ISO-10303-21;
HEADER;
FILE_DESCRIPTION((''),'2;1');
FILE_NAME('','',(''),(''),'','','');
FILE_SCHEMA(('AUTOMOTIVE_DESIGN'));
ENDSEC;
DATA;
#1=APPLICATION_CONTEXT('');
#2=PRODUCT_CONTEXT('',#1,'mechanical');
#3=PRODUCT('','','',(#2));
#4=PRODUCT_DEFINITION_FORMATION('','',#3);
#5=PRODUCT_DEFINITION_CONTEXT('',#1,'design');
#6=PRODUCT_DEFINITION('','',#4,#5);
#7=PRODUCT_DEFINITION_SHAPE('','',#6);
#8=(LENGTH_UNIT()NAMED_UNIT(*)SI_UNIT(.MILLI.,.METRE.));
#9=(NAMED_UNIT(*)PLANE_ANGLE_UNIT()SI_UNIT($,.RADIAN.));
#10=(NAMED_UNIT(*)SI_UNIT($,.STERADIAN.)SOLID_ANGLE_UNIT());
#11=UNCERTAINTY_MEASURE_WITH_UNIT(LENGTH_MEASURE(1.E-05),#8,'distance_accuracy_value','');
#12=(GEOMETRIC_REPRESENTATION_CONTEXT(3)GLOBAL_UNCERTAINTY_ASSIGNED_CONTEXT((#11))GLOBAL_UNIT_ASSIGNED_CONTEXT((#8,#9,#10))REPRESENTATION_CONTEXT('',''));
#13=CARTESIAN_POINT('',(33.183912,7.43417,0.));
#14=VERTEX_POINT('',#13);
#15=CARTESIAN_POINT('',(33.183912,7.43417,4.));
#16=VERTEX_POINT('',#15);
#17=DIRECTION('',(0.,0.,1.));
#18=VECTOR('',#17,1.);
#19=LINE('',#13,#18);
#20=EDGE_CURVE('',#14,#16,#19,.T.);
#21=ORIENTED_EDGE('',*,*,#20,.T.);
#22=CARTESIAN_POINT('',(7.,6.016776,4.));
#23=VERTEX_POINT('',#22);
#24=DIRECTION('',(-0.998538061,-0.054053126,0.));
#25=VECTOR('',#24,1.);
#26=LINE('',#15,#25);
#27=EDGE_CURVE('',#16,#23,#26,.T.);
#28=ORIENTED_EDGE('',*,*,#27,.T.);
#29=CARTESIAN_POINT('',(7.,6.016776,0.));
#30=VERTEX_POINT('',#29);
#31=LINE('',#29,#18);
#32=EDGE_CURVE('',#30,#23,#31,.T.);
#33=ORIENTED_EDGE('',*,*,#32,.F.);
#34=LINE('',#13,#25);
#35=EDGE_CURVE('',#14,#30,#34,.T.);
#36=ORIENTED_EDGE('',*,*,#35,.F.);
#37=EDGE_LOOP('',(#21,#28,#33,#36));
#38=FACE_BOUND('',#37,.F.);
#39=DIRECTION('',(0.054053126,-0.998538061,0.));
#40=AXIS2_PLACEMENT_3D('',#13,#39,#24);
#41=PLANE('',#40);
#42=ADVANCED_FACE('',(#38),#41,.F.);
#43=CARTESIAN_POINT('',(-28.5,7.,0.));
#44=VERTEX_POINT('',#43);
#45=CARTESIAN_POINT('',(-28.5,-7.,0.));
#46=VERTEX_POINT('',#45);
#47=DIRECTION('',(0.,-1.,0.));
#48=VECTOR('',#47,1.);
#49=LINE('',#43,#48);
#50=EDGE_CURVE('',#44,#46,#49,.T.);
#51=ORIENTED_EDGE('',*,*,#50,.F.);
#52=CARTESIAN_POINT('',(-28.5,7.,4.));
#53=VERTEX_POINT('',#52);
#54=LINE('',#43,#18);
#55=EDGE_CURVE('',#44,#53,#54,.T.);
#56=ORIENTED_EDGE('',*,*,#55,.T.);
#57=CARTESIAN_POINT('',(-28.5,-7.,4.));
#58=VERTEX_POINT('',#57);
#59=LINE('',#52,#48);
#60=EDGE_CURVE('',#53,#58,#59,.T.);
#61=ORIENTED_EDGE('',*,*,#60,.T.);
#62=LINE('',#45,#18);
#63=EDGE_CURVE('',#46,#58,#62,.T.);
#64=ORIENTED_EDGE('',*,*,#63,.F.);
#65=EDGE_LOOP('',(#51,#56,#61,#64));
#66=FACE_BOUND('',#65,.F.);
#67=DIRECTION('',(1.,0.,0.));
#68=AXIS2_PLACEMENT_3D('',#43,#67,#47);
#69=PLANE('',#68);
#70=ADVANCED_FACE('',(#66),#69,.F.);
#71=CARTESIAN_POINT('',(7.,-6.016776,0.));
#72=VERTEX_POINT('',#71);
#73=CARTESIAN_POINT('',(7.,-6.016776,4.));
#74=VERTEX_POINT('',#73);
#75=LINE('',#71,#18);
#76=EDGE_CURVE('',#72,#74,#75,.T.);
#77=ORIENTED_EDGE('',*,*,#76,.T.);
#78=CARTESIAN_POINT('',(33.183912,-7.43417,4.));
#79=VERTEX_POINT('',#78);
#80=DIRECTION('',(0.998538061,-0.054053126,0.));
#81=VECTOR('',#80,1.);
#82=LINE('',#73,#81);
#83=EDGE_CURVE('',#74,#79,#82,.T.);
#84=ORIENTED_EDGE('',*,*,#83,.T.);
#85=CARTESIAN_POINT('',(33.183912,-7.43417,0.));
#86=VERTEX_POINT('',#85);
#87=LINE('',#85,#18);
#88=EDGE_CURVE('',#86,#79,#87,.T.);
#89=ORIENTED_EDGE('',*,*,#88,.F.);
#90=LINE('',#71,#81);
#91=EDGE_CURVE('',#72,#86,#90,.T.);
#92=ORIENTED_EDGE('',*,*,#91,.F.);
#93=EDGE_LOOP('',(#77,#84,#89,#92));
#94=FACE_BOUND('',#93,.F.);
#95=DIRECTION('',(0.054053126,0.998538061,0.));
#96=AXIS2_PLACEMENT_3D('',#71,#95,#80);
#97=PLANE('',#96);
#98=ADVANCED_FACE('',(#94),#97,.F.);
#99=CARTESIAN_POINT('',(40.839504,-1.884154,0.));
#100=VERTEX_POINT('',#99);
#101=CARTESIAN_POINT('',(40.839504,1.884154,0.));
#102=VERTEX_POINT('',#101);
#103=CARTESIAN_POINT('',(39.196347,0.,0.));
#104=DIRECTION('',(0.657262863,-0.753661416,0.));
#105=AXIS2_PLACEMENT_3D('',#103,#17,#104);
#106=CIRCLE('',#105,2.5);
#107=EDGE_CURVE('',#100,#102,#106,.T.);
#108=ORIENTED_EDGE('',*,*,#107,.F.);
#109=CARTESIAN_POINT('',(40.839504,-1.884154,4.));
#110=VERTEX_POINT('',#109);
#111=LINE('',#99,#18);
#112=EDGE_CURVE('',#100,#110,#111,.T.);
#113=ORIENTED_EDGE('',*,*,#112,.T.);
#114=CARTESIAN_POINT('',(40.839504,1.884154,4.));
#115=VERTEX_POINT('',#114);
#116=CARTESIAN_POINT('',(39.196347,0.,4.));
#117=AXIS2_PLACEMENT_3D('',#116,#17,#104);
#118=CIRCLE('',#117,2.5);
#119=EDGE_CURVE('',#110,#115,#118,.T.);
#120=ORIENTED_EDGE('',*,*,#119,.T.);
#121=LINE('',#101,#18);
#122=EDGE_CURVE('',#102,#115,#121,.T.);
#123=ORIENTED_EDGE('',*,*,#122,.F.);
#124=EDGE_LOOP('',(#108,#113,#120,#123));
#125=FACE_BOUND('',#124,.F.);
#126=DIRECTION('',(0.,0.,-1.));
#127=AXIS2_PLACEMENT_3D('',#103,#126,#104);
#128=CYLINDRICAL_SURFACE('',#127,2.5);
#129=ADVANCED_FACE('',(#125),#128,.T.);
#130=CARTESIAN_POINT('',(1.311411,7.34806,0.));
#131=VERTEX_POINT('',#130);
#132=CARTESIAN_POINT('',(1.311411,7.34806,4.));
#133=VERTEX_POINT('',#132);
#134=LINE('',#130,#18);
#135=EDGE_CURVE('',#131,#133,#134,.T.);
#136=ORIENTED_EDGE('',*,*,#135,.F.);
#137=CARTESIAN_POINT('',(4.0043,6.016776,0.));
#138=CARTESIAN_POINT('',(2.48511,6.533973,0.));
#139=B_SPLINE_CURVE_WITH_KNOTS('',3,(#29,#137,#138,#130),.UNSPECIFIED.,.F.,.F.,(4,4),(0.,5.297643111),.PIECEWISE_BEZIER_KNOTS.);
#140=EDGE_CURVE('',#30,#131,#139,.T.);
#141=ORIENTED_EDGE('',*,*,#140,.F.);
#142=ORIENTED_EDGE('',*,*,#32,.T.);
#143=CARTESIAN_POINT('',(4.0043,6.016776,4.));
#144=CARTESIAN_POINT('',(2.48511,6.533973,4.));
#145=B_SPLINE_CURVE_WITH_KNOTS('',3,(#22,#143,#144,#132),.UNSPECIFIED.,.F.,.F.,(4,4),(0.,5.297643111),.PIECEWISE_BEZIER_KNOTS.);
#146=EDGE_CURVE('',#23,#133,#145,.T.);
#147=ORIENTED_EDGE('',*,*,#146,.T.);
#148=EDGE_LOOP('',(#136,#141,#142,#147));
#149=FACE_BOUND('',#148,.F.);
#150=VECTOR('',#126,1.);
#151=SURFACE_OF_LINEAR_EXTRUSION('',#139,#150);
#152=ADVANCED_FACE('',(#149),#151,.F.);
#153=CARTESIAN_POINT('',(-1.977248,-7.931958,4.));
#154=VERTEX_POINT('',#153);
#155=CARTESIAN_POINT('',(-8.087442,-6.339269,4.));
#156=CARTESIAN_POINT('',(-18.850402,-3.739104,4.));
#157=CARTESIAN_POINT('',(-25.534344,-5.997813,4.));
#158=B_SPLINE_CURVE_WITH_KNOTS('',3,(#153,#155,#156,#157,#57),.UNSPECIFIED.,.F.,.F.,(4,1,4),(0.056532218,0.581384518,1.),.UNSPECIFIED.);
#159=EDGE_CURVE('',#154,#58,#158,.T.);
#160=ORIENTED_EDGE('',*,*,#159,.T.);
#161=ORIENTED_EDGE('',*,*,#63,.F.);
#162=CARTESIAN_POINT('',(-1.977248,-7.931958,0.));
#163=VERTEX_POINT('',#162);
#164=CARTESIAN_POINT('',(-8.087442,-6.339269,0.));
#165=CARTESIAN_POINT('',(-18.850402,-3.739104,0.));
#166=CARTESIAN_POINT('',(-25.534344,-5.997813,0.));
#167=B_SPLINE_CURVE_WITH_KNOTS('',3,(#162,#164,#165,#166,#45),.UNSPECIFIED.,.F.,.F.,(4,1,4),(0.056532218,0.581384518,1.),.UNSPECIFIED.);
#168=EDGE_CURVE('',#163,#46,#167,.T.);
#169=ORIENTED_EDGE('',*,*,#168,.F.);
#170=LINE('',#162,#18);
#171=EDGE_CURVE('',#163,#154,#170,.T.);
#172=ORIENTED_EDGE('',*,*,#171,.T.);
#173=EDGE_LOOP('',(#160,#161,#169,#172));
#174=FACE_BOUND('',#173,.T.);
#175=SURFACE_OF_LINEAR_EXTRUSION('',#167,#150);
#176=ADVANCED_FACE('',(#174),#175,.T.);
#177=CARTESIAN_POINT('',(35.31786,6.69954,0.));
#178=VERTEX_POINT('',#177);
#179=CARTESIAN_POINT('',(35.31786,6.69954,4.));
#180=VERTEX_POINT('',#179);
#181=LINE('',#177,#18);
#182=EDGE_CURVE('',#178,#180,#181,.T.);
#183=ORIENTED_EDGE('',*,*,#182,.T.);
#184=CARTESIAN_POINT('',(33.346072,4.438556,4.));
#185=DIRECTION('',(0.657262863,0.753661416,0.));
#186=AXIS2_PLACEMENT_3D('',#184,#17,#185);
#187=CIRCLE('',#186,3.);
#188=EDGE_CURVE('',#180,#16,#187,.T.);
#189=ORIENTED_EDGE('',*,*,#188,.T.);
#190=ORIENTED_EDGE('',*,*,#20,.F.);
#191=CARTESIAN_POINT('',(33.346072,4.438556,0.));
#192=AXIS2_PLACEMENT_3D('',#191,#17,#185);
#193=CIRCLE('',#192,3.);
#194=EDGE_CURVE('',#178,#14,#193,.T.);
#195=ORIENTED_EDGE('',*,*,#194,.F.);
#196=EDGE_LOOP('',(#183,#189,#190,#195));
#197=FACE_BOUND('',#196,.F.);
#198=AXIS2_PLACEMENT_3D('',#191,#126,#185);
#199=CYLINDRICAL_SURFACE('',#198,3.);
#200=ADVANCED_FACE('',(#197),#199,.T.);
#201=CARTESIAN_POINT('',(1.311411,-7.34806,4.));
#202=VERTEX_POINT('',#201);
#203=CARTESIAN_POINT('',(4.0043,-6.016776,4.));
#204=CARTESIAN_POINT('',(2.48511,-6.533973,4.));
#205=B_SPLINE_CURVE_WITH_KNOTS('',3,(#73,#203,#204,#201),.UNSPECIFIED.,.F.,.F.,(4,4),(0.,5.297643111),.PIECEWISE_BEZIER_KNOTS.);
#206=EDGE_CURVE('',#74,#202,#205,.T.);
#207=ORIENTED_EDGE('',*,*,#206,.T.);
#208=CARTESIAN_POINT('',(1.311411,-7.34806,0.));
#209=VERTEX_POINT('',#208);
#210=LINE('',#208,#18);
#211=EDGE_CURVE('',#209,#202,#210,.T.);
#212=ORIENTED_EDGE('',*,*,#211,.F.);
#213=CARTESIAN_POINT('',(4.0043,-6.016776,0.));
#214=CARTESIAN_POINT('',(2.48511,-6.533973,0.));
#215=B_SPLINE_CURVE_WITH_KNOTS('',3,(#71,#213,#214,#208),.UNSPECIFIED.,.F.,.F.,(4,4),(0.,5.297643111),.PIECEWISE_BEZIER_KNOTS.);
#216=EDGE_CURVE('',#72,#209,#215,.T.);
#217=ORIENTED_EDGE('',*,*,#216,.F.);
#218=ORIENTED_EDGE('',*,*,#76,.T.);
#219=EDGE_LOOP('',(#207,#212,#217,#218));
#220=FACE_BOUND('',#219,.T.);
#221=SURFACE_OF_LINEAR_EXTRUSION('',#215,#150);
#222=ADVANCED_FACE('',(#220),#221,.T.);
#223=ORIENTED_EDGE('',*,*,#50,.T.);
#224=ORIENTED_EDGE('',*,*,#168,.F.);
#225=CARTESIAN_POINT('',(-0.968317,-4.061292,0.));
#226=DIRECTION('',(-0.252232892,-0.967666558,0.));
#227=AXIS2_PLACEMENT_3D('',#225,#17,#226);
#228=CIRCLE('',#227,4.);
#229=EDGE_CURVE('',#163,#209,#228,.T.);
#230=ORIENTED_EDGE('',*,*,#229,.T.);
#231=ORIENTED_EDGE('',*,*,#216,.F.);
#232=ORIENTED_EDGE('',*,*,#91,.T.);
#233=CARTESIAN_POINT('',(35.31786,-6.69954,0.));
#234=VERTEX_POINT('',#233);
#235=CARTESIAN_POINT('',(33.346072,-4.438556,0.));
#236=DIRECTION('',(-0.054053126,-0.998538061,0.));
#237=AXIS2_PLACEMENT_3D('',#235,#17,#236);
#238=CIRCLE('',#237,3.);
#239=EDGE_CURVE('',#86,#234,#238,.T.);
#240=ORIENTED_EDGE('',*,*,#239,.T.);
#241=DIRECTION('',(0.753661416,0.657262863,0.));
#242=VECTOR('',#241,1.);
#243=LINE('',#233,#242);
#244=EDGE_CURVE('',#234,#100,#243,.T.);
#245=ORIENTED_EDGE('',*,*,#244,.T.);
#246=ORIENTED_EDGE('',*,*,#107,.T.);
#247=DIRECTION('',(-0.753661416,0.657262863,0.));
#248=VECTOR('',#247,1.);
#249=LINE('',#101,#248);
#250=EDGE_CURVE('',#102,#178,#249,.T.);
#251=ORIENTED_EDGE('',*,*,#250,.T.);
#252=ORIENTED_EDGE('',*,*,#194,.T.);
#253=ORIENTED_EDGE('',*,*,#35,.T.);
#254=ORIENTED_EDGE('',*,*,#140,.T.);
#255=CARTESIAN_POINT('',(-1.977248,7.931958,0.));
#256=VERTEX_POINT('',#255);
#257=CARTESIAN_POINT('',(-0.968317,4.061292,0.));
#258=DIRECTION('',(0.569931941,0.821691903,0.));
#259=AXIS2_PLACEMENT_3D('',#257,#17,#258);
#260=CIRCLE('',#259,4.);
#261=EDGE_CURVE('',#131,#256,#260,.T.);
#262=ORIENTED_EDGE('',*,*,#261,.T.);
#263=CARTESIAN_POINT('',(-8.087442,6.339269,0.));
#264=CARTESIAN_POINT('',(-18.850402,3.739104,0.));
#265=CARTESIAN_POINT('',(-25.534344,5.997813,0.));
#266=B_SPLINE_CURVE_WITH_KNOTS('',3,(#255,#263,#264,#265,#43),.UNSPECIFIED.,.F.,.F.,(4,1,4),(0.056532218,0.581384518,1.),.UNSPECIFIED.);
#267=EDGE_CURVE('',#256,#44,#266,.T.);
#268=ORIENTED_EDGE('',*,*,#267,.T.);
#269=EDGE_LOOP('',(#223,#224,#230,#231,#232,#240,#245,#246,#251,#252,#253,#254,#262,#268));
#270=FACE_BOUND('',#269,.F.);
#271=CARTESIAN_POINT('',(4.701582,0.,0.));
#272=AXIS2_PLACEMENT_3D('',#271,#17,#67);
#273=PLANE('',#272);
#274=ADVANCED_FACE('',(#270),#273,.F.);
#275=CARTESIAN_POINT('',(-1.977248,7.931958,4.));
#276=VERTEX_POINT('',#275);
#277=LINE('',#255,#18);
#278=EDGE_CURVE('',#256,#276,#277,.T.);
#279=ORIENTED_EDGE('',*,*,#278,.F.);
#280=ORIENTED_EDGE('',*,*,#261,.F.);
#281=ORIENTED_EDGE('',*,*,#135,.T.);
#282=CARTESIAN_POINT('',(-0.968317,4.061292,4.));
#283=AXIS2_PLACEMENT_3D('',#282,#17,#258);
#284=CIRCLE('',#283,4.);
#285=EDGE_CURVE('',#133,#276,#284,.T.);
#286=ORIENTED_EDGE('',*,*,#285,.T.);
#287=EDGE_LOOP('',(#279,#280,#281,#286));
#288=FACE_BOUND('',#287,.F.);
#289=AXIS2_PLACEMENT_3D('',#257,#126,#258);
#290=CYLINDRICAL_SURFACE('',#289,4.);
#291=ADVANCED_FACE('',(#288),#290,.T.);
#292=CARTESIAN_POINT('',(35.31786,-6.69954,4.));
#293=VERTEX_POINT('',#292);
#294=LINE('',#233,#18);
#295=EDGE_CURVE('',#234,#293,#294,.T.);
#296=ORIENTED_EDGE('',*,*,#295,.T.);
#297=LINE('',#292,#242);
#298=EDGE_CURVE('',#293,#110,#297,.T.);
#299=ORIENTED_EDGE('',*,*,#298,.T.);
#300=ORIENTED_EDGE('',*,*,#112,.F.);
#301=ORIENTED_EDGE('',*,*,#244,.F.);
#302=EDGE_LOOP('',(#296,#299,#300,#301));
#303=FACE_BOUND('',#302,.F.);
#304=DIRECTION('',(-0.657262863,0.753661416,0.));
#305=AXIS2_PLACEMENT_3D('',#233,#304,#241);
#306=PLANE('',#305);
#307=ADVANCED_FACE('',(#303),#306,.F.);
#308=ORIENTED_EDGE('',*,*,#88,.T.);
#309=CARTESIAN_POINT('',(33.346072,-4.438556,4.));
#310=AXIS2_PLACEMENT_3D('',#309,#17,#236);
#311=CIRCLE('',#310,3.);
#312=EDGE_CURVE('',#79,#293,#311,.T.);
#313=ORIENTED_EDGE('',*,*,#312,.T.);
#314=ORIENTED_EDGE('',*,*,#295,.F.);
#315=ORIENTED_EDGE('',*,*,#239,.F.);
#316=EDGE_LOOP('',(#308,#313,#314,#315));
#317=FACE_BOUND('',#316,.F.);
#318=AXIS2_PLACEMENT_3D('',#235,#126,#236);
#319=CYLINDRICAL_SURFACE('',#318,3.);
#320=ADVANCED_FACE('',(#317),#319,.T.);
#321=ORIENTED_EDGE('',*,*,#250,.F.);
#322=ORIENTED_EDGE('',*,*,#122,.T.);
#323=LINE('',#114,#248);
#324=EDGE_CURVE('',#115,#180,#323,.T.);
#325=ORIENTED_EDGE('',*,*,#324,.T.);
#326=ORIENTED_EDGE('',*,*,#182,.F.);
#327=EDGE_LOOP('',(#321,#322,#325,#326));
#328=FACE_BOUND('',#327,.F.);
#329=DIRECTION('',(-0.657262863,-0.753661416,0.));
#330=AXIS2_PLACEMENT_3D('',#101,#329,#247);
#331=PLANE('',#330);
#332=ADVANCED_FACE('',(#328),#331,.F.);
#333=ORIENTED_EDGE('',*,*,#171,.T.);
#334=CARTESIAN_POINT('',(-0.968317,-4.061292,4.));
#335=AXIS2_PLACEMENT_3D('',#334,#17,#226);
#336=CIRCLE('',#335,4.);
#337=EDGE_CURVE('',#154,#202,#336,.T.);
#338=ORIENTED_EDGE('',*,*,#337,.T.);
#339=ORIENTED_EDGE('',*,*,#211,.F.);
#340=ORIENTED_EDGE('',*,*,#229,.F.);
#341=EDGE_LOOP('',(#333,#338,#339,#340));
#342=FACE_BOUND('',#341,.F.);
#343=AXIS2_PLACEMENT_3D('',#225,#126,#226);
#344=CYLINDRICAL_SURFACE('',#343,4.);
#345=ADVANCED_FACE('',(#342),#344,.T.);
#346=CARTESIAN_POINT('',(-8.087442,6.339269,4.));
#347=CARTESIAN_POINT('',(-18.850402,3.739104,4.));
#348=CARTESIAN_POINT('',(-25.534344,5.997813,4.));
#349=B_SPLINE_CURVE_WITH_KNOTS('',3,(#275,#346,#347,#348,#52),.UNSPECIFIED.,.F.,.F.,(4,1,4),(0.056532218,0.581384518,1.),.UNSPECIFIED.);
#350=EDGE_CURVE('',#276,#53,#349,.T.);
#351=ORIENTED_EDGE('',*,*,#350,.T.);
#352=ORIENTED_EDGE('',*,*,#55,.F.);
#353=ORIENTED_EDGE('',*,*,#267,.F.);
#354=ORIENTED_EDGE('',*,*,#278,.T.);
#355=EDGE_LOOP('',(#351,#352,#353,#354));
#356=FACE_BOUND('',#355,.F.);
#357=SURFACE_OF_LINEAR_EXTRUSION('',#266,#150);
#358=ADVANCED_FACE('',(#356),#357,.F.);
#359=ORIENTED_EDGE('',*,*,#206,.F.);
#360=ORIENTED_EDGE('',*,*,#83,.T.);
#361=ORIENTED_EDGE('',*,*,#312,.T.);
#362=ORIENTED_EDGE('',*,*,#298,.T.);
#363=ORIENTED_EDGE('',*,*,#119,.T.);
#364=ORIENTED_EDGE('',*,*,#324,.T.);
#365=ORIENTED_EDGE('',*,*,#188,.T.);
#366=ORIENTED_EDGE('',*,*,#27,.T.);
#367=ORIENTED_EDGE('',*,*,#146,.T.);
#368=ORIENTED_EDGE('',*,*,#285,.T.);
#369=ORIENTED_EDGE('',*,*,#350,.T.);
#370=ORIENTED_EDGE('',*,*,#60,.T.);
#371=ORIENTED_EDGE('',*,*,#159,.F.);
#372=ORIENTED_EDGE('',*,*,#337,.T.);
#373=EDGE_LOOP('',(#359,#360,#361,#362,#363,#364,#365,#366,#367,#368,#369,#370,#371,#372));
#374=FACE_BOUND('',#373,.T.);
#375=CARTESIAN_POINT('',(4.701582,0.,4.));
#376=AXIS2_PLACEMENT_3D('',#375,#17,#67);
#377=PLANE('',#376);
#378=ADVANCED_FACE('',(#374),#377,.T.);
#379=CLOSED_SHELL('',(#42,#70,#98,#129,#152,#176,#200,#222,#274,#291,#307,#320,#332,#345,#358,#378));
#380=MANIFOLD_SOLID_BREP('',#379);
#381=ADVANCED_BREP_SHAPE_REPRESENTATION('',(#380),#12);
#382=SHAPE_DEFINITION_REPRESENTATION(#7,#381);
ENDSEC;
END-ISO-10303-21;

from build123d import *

# Parameters (mm, degrees)
F1_DEPTH = 4


with BuildPart() as f1:
    # F0 (on Top) → F1 (new body)
    with BuildSketch(Plane.XY):
        with BuildLine():
            Line((33.1839122816, 7.4341704185), (7, 6.0167759657))
            add(Edge.make_bspline(
                [(7, 6.0167759657), (4.0042999393, 6.0167759657), (2.4851097846, 6.5339730516), (1.3114110288, 7.3480597034)],
                knots=[0, 0, 0, 0, 5.2976431113, 5.2976431113, 5.2976431113, 5.2976431113], degree=3))
            ThreePointArc((1.3114110288, 7.3480597034), (-0.2690563082, 7.9996972089), (-1.9772483015, 7.9319583269))
            add(Edge.make_bspline(
                [(-1.9772483015, 7.9319583269), (-8.0874424423, 6.3392692714), (-18.8504021756, 3.7391038399), (-25.5343435285, 5.9978133829), (-28.5, 7)],
                knots=[0.0565322181, 0.0565322181, 0.0565322181, 0.0565322181, 0.5813845177, 1, 1, 1, 1], degree=3))
            Line((-28.5, 7), (-28.5, 0))
            Line((-28.5, 0), (-28.5, -7))
            add(Edge.make_bspline(
                [(-1.9772483015, -7.9319583269), (-8.0874424423, -6.3392692714), (-18.8504021756, -3.7391038399), (-25.5343435285, -5.9978133829), (-28.5, -7)],
                knots=[0.0565322181, 0.0565322181, 0.0565322181, 0.0565322181, 0.5813845177, 1, 1, 1, 1], degree=3))
            ThreePointArc((-1.9772483015, -7.9319583269), (-0.2690563082, -7.9996972089), (1.3114110288, -7.3480597034))
            add(Edge.make_bspline(
                [(7, -6.0167759657), (4.0042999393, -6.0167759657), (2.4851097846, -6.5339730516), (1.3114110288, -7.3480597034)],
                knots=[0, 0, 0, 0, 5.2976431113, 5.2976431113, 5.2976431113, 5.2976431113], degree=3))
            Line((7, -6.0167759657), (33.1839122816, -7.4341704185))
            ThreePointArc((33.1839122816, -7.4341704185), (34.3226011035, -7.2751722198), (35.3178602471, -6.6995404822))
            Line((35.3178602471, -6.6995404822), (40.8395039416, -1.8841535393))
            ThreePointArc((40.8395039416, -1.8841535393), (41.6963467853, 0), (40.8395039416, 1.8841535393))
            Line((40.8395039416, 1.8841535393), (35.3178602471, 6.6995404822))
            ThreePointArc((35.3178602471, 6.6995404822), (34.3226011035, 7.2751722198), (33.1839122816, 7.4341704185))
        make_face()
    extrude(amount=F1_DEPTH)


solid = f1.part
